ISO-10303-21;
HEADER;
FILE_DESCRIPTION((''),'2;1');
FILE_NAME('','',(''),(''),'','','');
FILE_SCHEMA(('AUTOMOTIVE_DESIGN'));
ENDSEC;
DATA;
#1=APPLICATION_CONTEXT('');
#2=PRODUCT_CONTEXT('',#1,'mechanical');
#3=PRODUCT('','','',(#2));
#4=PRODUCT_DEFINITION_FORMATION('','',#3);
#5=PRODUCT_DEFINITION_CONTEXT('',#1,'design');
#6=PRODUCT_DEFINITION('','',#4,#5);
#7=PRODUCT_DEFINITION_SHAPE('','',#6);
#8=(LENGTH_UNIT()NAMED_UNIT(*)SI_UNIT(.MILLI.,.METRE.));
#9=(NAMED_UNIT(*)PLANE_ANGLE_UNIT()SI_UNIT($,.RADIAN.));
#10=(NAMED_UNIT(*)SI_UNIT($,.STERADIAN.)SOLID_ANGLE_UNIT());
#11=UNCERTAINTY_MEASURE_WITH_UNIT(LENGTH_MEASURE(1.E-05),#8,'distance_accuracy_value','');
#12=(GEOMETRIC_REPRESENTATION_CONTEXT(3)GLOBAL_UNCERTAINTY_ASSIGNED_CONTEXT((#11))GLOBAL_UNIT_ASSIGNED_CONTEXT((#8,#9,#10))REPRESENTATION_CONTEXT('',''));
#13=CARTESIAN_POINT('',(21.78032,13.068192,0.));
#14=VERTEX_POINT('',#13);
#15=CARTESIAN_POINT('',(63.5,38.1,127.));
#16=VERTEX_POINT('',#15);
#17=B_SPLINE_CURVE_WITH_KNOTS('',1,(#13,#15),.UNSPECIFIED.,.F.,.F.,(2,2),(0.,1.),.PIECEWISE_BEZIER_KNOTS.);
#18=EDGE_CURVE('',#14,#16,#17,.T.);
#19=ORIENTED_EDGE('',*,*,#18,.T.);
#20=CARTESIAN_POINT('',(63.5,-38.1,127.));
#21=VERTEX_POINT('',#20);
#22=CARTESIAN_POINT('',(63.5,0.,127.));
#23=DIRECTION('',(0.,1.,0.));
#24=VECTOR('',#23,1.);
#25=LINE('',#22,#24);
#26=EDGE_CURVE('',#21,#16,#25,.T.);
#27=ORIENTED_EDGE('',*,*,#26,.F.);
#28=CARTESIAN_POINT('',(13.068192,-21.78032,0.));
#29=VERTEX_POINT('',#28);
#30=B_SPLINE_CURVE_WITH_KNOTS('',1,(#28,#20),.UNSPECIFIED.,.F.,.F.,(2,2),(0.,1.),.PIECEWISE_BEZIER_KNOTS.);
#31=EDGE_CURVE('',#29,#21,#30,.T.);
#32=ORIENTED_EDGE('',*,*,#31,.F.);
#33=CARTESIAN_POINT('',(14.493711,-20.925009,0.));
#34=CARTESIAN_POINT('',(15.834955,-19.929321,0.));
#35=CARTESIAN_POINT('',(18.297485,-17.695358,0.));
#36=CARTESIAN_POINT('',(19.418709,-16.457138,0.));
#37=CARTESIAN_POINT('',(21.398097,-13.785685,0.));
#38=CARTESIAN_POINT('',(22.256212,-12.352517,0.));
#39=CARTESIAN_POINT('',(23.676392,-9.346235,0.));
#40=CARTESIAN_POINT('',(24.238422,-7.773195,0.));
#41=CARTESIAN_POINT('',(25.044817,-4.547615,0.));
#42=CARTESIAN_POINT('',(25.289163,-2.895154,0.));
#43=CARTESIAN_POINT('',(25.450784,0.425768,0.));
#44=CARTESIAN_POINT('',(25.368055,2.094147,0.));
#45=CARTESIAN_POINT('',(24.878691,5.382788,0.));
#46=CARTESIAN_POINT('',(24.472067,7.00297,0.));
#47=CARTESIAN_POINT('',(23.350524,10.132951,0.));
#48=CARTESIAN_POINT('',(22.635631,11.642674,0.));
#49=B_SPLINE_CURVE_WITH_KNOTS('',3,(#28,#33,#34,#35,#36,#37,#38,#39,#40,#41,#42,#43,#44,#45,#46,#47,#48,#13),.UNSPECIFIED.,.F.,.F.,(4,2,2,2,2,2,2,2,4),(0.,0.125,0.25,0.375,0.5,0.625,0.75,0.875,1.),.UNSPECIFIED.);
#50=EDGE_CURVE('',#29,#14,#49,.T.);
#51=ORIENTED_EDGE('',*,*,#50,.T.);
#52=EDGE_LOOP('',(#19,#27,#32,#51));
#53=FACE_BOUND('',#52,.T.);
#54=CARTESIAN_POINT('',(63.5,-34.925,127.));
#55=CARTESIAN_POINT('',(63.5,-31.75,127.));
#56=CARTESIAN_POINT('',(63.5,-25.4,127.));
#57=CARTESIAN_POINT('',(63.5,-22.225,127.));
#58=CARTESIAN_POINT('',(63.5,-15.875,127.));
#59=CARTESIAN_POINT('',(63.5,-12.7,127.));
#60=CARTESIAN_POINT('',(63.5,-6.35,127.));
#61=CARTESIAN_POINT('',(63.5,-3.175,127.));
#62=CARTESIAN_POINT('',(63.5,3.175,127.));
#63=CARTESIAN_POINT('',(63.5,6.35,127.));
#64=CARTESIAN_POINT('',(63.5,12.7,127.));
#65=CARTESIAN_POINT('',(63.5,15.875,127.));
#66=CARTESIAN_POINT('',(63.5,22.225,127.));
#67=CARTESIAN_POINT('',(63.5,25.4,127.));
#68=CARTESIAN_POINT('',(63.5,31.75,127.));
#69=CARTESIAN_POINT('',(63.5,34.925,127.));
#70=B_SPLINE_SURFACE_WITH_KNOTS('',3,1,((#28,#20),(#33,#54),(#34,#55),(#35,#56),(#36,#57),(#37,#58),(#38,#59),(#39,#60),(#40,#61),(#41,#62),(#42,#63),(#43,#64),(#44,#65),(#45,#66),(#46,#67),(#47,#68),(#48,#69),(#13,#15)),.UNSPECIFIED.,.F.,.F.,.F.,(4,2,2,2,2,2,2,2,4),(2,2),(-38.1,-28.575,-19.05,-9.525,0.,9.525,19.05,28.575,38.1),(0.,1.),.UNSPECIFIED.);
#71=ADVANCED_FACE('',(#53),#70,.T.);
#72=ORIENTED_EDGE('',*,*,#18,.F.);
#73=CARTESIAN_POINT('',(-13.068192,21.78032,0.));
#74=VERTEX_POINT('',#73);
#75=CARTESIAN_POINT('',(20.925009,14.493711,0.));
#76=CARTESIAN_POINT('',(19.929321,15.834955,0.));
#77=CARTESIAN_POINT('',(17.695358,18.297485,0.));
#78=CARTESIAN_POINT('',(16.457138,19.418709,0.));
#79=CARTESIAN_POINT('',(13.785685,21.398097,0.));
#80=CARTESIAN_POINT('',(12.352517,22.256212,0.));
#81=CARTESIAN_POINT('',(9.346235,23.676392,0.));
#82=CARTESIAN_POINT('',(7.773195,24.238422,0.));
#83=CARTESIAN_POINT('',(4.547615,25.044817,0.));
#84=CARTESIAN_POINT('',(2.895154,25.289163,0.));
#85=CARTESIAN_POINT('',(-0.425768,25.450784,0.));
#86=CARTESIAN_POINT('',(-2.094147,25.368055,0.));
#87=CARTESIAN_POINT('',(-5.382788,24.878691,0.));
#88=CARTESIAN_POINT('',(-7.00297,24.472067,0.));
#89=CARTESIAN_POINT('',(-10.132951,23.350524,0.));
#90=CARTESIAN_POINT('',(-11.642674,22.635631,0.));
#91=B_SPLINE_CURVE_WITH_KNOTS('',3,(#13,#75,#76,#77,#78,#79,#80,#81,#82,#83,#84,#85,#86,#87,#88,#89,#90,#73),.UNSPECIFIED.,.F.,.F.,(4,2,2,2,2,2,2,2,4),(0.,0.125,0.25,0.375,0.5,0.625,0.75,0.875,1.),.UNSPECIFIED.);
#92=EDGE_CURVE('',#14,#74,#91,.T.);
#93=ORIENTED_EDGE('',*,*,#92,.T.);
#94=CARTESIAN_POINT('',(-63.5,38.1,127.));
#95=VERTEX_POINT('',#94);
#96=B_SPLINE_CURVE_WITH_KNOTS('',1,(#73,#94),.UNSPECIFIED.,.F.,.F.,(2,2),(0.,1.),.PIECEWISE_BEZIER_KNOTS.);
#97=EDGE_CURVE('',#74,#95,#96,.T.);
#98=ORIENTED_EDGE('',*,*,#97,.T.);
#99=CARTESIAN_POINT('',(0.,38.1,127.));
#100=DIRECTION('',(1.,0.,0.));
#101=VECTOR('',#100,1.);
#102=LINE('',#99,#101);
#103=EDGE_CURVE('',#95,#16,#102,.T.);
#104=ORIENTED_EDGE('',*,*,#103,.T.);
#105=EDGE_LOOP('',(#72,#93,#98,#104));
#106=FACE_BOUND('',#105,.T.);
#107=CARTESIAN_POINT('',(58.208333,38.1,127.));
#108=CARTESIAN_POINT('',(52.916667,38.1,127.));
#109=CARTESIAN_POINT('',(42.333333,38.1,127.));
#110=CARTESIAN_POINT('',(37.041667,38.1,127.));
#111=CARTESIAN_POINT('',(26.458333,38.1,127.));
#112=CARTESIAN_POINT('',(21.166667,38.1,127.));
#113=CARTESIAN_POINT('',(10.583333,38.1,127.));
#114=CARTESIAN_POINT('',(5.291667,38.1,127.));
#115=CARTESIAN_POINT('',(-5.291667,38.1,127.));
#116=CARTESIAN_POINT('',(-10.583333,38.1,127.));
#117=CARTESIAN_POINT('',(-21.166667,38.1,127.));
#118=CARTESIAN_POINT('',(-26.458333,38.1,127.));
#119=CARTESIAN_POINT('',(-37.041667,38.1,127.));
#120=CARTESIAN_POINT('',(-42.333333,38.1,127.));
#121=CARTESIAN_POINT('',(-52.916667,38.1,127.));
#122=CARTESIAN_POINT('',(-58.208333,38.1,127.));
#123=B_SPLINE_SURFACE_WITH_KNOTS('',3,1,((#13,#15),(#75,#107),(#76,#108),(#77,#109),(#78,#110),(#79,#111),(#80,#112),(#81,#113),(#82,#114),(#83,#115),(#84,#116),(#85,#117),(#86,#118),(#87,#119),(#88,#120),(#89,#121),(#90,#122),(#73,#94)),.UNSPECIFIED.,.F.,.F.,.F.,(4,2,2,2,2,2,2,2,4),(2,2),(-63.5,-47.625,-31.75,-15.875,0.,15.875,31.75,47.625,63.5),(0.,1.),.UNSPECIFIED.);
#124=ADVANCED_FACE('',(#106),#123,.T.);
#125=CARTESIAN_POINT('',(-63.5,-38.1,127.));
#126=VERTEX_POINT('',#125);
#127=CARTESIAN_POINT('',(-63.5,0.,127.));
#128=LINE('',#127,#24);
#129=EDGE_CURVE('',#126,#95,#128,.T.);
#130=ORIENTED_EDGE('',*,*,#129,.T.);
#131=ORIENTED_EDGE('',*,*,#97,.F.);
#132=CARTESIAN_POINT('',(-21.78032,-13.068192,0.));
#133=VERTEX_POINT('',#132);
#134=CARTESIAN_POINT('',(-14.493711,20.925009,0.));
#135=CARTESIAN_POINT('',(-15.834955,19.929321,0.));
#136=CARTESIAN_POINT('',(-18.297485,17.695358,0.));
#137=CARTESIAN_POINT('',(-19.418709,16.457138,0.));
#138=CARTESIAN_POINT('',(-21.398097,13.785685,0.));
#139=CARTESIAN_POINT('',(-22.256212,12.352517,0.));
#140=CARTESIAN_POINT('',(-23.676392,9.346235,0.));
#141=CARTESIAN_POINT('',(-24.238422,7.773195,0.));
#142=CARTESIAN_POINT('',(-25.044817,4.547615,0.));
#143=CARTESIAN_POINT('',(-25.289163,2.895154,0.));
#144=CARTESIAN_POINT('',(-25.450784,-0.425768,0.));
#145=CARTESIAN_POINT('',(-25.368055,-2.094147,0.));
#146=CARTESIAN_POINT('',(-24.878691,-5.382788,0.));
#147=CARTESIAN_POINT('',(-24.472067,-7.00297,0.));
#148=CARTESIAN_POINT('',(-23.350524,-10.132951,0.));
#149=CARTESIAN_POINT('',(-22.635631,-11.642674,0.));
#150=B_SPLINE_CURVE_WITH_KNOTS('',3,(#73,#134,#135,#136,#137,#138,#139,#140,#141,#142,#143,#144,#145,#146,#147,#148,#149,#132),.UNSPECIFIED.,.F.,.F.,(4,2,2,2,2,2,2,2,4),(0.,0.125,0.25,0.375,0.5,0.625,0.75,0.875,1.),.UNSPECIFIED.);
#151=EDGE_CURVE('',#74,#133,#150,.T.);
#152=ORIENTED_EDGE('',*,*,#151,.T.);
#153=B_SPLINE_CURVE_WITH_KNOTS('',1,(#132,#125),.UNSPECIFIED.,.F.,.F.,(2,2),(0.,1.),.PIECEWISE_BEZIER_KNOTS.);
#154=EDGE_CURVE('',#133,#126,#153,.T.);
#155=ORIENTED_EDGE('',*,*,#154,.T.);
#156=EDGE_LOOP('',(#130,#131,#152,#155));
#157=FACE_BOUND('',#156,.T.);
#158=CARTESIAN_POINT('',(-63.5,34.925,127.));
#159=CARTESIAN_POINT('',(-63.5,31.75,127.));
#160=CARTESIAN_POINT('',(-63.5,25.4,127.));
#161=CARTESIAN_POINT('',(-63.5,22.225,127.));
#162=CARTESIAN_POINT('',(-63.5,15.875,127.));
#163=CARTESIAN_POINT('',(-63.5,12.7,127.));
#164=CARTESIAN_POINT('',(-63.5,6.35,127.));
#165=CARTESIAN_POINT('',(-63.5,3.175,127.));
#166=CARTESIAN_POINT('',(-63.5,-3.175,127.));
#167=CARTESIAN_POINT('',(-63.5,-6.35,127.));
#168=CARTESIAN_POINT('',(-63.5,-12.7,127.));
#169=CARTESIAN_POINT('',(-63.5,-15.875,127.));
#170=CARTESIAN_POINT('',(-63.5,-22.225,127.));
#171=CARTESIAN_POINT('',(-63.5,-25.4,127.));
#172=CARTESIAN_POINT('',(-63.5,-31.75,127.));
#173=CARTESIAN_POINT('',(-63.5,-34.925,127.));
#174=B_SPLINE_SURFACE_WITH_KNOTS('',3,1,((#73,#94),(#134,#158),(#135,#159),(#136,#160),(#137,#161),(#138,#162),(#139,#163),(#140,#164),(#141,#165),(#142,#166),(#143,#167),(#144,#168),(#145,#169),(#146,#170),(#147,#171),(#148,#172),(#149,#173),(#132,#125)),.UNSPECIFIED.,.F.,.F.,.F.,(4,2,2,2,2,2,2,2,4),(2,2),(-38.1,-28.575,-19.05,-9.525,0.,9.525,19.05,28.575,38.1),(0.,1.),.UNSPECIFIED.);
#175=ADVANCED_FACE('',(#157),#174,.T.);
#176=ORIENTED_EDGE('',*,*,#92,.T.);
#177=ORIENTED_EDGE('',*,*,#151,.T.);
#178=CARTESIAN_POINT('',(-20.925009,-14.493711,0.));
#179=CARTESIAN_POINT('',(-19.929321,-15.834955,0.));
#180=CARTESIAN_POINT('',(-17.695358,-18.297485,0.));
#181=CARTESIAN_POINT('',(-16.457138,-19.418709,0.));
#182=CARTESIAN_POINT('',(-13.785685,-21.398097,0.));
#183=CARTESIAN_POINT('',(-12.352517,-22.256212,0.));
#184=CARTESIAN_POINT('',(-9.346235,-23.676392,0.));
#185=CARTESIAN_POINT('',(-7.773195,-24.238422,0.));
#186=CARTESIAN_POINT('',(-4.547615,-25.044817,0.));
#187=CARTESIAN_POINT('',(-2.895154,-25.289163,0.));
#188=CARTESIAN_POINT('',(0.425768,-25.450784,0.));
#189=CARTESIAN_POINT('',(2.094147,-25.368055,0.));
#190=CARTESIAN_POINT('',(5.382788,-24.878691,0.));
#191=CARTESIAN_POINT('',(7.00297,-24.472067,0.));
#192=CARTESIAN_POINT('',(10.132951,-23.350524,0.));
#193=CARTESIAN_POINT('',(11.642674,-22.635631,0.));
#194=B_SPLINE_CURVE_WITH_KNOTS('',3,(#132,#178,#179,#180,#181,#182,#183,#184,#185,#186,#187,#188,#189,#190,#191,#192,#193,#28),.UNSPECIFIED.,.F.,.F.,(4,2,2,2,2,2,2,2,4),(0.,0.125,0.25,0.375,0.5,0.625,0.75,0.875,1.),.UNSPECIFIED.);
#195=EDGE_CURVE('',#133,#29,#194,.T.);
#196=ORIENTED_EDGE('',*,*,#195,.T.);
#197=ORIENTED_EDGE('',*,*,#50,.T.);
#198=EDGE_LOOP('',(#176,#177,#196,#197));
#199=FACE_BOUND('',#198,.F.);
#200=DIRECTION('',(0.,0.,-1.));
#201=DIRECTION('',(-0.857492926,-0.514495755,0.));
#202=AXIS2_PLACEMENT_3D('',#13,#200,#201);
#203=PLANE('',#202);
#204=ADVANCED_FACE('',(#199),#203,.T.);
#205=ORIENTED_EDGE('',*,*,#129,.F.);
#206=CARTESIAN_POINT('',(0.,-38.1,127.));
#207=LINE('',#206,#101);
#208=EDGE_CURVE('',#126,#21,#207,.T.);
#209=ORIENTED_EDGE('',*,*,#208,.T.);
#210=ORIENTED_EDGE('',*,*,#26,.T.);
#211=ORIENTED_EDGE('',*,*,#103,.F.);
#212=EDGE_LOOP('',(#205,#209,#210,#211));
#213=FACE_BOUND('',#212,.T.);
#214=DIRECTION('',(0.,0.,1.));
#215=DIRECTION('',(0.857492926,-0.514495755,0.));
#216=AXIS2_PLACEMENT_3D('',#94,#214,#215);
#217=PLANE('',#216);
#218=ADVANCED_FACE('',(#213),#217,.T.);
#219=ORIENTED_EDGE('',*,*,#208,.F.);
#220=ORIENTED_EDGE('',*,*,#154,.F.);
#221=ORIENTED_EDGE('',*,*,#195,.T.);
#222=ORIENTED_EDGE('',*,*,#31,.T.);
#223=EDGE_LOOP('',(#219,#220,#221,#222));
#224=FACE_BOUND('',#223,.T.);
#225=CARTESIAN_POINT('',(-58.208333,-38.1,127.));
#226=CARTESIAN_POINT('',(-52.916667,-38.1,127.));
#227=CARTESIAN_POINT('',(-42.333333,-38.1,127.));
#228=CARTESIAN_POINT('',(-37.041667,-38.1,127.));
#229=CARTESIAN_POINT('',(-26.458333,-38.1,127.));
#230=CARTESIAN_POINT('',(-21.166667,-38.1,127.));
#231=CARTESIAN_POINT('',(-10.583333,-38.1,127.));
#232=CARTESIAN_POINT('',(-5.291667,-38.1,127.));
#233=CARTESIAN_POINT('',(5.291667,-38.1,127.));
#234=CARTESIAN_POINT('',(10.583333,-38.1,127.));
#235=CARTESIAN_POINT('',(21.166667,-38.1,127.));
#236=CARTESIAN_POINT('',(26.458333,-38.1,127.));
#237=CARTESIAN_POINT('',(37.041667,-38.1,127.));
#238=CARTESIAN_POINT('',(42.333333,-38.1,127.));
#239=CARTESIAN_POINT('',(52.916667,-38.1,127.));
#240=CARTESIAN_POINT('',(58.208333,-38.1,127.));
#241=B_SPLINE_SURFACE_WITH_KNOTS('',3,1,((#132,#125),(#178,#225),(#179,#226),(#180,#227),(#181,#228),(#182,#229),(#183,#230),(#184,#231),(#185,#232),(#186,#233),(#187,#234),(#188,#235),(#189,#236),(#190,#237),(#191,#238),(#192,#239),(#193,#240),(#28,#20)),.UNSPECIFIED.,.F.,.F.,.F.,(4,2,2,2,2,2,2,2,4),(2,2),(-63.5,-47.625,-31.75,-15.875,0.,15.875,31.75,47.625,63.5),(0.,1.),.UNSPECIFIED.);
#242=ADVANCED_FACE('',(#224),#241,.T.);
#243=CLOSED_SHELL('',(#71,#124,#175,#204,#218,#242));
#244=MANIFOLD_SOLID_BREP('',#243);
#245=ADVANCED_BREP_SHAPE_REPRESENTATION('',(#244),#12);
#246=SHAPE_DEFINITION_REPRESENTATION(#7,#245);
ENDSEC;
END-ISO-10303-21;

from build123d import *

# Parameters (mm, degrees)
F2_W = 127
F2_H = 76.2


# Not quite as in the source:
# - the arcs of a loft's sections are written as splines that run evenly, so that the points pair up as in the source's solid


with BuildPart() as f3:
    # F0 (on Top) → F3 section 0
    with BuildSketch(Plane.XY):
        with BuildLine():
            add(Edge.make_bspline(
                [(21.7803203131, 13.0681921879), (20.9250091345, 14.4937108189), (19.9293212464, 15.8349554859), (17.6953582406, 18.2974849998), (16.457138362, 19.4187089559), (13.7856846531, 21.3980970935), (12.3525168797, 22.2562123309), (9.3462349355, 23.6763923162), (7.773195101, 24.2384219474), (4.5476146508, 25.04481706), (2.8951537939, 25.2891626016), (-0.4257679146, 25.4507835294), (-2.0941466499, 25.3680549193), (-5.3827884578, 24.8786906608), (-7.0029702123, 24.472067113), (-10.1329514593, 23.3505236623), (-11.6426735568, 22.6356314917), (-13.0681921879, 21.7803203131)],
                knots=[0, 0, 0, 0, 0.125, 0.125, 0.25, 0.25, 0.375, 0.375, 0.5, 0.5, 0.625, 0.625, 0.75, 0.75, 0.875, 0.875, 1, 1, 1, 1], degree=3))
            add(Edge.make_bspline(
                [(-13.0681921879, 21.7803203131), (-14.4937108189, 20.9250091345), (-15.8349554859, 19.9293212464), (-18.2974849998, 17.6953582406), (-19.4187089559, 16.457138362), (-21.3980970935, 13.7856846531), (-22.2562123309, 12.3525168797), (-23.6763923162, 9.3462349355), (-24.2384219474, 7.773195101), (-25.04481706, 4.5476146508), (-25.2891626016, 2.8951537939), (-25.4507835294, -0.4257679146), (-25.3680549193, -2.0941466499), (-24.8786906608, -5.3827884578), (-24.472067113, -7.0029702123), (-23.3505236623, -10.1329514593), (-22.6356314917, -11.6426735568), (-21.7803203131, -13.0681921879)],
                knots=[0, 0, 0, 0, 0.125, 0.125, 0.25, 0.25, 0.375, 0.375, 0.5, 0.5, 0.625, 0.625, 0.75, 0.75, 0.875, 0.875, 1, 1, 1, 1], degree=3))
            add(Edge.make_bspline(
                [(-21.7803203131, -13.0681921879), (-20.9250091345, -14.4937108189), (-19.9293212464, -15.8349554859), (-17.6953582406, -18.2974849998), (-16.457138362, -19.4187089559), (-13.7856846531, -21.3980970935), (-12.3525168797, -22.2562123309), (-9.3462349355, -23.6763923162), (-7.773195101, -24.2384219474), (-4.5476146508, -25.04481706), (-2.8951537939, -25.2891626016), (0.4257679146, -25.4507835294), (2.0941466499, -25.3680549193), (5.3827884578, -24.8786906608), (7.0029702123, -24.472067113), (10.1329514593, -23.3505236623), (11.6426735568, -22.6356314917), (13.0681921879, -21.7803203131)],
                knots=[0, 0, 0, 0, 0.125, 0.125, 0.25, 0.25, 0.375, 0.375, 0.5, 0.5, 0.625, 0.625, 0.75, 0.75, 0.875, 0.875, 1, 1, 1, 1], degree=3))
            add(Edge.make_bspline(
                [(13.0681921879, -21.7803203131), (14.4937108189, -20.9250091345), (15.8349554859, -19.9293212464), (18.2974849998, -17.6953582406), (19.4187089559, -16.457138362), (21.3980970935, -13.7856846531), (22.2562123309, -12.3525168797), (23.6763923162, -9.3462349355), (24.2384219474, -7.773195101), (25.04481706, -4.5476146508), (25.2891626016, -2.8951537939), (25.4507835294, 0.4257679146), (25.3680549193, 2.0941466499), (24.8786906608, 5.3827884578), (24.472067113, 7.0029702123), (23.3505236623, 10.1329514593), (22.6356314917, 11.6426735568), (21.7803203131, 13.0681921879)],
                knots=[0, 0, 0, 0, 0.125, 0.125, 0.25, 0.25, 0.375, 0.375, 0.5, 0.5, 0.625, 0.625, 0.75, 0.75, 0.875, 0.875, 1, 1, 1, 1], degree=3))
        make_face()
    # F2 (on offset) → F3 section 1
    with BuildSketch(Plane.XY.offset(127)):
        Rectangle(F2_W, F2_H)
    loft(ruled=True)


solid = f3.part
